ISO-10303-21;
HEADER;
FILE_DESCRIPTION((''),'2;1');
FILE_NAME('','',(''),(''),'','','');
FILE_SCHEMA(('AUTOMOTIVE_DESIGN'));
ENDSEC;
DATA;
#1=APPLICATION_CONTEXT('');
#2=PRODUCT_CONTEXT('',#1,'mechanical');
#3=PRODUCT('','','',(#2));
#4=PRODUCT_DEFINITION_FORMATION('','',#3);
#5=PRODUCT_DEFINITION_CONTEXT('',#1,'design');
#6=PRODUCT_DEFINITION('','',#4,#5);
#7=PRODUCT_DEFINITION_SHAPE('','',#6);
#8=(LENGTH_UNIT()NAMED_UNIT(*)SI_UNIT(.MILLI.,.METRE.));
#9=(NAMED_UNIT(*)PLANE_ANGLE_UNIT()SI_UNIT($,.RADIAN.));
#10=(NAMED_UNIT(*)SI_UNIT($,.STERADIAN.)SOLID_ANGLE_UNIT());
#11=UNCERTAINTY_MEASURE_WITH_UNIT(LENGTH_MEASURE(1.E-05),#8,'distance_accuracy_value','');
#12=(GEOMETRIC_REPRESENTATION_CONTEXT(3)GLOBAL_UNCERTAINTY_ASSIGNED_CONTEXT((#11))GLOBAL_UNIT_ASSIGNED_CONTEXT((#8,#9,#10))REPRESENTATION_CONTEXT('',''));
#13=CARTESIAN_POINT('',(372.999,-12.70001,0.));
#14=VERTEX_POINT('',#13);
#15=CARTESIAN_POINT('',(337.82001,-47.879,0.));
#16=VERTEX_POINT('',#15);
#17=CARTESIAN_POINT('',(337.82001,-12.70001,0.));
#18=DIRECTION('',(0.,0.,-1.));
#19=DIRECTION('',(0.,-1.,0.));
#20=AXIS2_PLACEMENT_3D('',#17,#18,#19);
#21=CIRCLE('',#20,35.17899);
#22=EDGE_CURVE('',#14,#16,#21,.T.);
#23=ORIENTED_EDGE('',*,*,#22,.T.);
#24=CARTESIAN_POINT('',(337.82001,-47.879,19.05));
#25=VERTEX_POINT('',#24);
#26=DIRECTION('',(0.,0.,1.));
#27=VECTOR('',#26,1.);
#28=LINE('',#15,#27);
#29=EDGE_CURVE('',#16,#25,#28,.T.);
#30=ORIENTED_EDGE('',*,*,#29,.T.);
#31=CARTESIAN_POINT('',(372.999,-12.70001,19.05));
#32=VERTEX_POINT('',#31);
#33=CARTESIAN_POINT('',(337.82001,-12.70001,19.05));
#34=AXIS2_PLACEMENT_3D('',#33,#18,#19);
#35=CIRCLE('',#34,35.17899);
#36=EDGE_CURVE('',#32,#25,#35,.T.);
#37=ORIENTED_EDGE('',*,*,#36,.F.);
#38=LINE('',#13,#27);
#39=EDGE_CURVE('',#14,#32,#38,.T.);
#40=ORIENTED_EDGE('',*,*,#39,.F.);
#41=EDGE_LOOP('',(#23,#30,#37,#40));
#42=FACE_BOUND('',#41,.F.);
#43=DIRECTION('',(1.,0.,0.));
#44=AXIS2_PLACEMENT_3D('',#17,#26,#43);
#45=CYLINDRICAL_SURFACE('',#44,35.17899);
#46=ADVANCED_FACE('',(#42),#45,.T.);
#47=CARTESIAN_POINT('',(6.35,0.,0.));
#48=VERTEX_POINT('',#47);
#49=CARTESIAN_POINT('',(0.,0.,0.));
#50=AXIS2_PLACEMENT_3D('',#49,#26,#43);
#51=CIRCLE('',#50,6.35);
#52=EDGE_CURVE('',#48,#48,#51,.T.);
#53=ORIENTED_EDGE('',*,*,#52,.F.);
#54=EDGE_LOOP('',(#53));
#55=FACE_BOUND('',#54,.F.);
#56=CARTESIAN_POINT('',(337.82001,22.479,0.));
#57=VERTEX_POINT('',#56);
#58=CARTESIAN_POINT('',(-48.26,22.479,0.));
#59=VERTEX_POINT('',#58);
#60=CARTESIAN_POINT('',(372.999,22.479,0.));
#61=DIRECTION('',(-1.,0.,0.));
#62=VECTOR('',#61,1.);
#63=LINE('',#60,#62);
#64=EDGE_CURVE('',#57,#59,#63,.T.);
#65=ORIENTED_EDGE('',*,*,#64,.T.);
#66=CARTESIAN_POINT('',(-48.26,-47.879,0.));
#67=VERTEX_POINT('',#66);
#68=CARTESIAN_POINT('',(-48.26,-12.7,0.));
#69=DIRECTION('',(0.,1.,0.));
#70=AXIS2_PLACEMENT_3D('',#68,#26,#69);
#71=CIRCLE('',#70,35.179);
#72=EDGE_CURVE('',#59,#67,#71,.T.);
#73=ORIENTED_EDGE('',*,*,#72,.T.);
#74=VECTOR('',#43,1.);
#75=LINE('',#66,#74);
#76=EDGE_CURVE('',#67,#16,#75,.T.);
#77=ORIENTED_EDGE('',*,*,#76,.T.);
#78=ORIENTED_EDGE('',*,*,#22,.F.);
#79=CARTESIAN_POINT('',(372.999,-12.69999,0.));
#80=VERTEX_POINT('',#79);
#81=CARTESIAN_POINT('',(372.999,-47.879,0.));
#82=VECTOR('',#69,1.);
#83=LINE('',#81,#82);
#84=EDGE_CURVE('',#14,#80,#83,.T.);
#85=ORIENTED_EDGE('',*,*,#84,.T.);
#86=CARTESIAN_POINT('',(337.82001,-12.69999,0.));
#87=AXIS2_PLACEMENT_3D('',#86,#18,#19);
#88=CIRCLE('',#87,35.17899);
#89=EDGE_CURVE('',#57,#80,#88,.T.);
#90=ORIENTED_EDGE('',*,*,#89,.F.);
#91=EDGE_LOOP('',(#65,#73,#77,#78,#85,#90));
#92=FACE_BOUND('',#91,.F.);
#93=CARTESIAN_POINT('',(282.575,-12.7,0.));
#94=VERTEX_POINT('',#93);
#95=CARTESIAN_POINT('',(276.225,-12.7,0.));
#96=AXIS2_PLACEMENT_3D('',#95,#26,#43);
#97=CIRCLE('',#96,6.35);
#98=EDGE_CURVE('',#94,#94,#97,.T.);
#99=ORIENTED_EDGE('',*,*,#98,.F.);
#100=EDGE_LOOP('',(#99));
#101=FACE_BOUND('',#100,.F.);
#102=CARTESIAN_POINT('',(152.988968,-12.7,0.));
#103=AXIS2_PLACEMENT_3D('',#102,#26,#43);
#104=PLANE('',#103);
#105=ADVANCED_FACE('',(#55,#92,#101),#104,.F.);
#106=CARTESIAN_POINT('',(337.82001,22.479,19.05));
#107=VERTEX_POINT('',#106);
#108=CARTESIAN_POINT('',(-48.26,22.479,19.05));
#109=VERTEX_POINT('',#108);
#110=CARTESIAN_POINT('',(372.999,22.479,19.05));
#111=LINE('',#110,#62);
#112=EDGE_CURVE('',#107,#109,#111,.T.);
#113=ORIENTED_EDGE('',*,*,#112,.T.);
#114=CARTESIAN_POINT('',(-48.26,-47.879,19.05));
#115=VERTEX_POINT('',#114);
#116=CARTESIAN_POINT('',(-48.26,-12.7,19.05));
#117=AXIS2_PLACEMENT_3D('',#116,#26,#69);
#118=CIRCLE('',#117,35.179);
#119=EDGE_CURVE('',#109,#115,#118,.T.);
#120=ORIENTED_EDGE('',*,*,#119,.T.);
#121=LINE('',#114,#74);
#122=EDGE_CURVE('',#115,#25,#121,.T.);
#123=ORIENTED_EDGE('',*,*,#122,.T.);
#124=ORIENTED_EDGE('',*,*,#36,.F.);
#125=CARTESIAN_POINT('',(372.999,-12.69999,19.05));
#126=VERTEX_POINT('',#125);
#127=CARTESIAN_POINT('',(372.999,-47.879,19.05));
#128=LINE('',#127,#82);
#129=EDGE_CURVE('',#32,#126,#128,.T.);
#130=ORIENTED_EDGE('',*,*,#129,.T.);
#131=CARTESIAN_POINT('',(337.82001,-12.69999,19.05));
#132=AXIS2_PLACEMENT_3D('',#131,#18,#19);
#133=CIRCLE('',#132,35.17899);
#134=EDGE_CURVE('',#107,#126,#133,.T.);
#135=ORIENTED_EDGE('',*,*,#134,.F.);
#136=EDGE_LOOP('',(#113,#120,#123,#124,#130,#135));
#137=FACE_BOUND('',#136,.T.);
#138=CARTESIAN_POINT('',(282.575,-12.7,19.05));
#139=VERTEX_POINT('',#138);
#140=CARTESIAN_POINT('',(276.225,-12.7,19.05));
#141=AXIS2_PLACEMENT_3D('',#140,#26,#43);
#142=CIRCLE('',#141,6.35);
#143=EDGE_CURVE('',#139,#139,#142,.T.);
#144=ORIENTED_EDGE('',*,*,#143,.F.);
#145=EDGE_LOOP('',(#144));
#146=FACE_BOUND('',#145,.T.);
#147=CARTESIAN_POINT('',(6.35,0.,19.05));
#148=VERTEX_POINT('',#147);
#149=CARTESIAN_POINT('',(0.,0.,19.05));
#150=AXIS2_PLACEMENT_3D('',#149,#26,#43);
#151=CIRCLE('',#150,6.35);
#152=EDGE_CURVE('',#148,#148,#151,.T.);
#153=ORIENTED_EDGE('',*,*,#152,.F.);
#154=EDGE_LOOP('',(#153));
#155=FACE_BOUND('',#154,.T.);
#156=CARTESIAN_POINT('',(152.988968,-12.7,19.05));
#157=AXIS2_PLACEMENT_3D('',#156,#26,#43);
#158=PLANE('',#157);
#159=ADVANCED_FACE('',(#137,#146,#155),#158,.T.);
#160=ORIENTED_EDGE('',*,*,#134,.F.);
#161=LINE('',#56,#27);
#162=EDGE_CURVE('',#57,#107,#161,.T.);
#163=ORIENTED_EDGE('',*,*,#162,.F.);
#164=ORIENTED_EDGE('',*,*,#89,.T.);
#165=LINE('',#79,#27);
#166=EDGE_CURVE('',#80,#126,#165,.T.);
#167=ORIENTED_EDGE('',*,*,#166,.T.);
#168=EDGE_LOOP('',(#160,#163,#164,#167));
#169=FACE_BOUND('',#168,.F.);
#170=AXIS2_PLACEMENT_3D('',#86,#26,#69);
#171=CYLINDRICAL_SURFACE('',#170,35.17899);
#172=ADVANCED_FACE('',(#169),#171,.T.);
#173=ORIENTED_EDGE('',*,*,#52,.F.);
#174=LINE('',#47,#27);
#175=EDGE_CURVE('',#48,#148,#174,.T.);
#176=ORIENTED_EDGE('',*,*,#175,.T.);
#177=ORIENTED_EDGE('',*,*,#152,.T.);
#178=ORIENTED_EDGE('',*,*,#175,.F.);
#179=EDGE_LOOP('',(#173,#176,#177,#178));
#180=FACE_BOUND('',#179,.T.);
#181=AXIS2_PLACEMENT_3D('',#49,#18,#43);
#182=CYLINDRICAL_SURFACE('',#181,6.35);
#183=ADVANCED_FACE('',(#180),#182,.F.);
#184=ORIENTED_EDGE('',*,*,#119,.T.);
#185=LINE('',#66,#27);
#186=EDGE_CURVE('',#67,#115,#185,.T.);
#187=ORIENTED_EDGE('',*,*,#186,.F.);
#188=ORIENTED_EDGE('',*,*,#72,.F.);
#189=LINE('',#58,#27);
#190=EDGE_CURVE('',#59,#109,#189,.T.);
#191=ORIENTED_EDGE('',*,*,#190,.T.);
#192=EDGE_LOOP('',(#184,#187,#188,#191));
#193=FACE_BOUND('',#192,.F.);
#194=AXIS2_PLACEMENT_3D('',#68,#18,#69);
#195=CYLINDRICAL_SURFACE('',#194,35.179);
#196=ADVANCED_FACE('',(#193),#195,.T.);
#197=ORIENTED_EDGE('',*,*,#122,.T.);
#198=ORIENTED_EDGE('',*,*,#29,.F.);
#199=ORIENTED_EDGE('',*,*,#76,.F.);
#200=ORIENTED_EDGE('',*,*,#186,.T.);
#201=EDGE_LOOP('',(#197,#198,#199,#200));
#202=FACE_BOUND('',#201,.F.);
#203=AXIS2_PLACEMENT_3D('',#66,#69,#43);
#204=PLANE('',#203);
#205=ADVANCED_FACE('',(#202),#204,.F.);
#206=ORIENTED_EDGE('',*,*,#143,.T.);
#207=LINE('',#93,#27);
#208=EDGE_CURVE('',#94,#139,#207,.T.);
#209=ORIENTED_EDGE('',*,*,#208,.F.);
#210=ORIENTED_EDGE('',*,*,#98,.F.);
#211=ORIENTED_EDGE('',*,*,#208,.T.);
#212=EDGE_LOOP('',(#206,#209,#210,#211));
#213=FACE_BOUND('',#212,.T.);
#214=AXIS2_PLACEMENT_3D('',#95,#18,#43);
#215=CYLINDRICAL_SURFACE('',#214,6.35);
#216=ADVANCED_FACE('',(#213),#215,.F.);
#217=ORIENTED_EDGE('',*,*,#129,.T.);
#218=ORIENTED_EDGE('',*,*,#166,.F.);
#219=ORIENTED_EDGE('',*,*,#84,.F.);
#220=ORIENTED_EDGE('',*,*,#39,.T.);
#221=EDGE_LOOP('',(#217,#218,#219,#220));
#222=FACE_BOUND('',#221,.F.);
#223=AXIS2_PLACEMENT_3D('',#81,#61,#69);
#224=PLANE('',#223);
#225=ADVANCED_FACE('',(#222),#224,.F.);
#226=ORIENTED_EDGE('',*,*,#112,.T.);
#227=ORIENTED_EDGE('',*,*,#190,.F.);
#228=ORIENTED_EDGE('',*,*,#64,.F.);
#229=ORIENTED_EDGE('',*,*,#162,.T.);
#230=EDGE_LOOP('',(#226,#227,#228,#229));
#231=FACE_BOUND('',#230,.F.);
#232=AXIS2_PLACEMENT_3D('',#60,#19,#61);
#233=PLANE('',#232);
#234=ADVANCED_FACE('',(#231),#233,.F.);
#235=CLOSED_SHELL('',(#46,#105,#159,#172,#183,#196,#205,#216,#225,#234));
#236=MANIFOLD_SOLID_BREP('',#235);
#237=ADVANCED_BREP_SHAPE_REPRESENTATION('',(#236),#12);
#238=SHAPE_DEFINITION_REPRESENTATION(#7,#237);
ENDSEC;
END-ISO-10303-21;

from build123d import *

# Parameters (mm, degrees)
F0_R     = 6.35
F1_DEPTH = 19.05
F2_R     = 35.17899


# Not quite as in the source:
# - a fillet or chamfer is up to 0.001 mm smaller than in the source, because OpenCascade refuses the exact size


with BuildPart() as f1:
    # F0 (on Top) → F1 (new body)
    with BuildSketch(Plane.XY):
        with BuildLine():
            Line((372.999, 22.479), (-48.26, 22.479))
            ThreePointArc((-48.26, 22.479), (-83.439, -12.7), (-48.26, -47.879))
            Line((-48.26, -47.879), (372.999, -47.879))
            Line((372.999, -47.879), (372.999, 22.479))
        make_face()
        Circle(F0_R, mode=Mode.SUBTRACT)
        with Locations((276.225, -12.7)):
            Circle(F0_R, mode=Mode.SUBTRACT)
    extrude(amount=F1_DEPTH)

    # F2 (radius 35.179 in the source; OpenCascade refuses exactly that, so slightly less here)
    f2_edges = [f1.edges().sort_by_distance(p)[0] for p in [
        (372.999, -47.879, 9.525),
        (372.999, 22.479, 9.525),
    ]]
    fillet(f2_edges, radius=F2_R)


solid = f1.part
